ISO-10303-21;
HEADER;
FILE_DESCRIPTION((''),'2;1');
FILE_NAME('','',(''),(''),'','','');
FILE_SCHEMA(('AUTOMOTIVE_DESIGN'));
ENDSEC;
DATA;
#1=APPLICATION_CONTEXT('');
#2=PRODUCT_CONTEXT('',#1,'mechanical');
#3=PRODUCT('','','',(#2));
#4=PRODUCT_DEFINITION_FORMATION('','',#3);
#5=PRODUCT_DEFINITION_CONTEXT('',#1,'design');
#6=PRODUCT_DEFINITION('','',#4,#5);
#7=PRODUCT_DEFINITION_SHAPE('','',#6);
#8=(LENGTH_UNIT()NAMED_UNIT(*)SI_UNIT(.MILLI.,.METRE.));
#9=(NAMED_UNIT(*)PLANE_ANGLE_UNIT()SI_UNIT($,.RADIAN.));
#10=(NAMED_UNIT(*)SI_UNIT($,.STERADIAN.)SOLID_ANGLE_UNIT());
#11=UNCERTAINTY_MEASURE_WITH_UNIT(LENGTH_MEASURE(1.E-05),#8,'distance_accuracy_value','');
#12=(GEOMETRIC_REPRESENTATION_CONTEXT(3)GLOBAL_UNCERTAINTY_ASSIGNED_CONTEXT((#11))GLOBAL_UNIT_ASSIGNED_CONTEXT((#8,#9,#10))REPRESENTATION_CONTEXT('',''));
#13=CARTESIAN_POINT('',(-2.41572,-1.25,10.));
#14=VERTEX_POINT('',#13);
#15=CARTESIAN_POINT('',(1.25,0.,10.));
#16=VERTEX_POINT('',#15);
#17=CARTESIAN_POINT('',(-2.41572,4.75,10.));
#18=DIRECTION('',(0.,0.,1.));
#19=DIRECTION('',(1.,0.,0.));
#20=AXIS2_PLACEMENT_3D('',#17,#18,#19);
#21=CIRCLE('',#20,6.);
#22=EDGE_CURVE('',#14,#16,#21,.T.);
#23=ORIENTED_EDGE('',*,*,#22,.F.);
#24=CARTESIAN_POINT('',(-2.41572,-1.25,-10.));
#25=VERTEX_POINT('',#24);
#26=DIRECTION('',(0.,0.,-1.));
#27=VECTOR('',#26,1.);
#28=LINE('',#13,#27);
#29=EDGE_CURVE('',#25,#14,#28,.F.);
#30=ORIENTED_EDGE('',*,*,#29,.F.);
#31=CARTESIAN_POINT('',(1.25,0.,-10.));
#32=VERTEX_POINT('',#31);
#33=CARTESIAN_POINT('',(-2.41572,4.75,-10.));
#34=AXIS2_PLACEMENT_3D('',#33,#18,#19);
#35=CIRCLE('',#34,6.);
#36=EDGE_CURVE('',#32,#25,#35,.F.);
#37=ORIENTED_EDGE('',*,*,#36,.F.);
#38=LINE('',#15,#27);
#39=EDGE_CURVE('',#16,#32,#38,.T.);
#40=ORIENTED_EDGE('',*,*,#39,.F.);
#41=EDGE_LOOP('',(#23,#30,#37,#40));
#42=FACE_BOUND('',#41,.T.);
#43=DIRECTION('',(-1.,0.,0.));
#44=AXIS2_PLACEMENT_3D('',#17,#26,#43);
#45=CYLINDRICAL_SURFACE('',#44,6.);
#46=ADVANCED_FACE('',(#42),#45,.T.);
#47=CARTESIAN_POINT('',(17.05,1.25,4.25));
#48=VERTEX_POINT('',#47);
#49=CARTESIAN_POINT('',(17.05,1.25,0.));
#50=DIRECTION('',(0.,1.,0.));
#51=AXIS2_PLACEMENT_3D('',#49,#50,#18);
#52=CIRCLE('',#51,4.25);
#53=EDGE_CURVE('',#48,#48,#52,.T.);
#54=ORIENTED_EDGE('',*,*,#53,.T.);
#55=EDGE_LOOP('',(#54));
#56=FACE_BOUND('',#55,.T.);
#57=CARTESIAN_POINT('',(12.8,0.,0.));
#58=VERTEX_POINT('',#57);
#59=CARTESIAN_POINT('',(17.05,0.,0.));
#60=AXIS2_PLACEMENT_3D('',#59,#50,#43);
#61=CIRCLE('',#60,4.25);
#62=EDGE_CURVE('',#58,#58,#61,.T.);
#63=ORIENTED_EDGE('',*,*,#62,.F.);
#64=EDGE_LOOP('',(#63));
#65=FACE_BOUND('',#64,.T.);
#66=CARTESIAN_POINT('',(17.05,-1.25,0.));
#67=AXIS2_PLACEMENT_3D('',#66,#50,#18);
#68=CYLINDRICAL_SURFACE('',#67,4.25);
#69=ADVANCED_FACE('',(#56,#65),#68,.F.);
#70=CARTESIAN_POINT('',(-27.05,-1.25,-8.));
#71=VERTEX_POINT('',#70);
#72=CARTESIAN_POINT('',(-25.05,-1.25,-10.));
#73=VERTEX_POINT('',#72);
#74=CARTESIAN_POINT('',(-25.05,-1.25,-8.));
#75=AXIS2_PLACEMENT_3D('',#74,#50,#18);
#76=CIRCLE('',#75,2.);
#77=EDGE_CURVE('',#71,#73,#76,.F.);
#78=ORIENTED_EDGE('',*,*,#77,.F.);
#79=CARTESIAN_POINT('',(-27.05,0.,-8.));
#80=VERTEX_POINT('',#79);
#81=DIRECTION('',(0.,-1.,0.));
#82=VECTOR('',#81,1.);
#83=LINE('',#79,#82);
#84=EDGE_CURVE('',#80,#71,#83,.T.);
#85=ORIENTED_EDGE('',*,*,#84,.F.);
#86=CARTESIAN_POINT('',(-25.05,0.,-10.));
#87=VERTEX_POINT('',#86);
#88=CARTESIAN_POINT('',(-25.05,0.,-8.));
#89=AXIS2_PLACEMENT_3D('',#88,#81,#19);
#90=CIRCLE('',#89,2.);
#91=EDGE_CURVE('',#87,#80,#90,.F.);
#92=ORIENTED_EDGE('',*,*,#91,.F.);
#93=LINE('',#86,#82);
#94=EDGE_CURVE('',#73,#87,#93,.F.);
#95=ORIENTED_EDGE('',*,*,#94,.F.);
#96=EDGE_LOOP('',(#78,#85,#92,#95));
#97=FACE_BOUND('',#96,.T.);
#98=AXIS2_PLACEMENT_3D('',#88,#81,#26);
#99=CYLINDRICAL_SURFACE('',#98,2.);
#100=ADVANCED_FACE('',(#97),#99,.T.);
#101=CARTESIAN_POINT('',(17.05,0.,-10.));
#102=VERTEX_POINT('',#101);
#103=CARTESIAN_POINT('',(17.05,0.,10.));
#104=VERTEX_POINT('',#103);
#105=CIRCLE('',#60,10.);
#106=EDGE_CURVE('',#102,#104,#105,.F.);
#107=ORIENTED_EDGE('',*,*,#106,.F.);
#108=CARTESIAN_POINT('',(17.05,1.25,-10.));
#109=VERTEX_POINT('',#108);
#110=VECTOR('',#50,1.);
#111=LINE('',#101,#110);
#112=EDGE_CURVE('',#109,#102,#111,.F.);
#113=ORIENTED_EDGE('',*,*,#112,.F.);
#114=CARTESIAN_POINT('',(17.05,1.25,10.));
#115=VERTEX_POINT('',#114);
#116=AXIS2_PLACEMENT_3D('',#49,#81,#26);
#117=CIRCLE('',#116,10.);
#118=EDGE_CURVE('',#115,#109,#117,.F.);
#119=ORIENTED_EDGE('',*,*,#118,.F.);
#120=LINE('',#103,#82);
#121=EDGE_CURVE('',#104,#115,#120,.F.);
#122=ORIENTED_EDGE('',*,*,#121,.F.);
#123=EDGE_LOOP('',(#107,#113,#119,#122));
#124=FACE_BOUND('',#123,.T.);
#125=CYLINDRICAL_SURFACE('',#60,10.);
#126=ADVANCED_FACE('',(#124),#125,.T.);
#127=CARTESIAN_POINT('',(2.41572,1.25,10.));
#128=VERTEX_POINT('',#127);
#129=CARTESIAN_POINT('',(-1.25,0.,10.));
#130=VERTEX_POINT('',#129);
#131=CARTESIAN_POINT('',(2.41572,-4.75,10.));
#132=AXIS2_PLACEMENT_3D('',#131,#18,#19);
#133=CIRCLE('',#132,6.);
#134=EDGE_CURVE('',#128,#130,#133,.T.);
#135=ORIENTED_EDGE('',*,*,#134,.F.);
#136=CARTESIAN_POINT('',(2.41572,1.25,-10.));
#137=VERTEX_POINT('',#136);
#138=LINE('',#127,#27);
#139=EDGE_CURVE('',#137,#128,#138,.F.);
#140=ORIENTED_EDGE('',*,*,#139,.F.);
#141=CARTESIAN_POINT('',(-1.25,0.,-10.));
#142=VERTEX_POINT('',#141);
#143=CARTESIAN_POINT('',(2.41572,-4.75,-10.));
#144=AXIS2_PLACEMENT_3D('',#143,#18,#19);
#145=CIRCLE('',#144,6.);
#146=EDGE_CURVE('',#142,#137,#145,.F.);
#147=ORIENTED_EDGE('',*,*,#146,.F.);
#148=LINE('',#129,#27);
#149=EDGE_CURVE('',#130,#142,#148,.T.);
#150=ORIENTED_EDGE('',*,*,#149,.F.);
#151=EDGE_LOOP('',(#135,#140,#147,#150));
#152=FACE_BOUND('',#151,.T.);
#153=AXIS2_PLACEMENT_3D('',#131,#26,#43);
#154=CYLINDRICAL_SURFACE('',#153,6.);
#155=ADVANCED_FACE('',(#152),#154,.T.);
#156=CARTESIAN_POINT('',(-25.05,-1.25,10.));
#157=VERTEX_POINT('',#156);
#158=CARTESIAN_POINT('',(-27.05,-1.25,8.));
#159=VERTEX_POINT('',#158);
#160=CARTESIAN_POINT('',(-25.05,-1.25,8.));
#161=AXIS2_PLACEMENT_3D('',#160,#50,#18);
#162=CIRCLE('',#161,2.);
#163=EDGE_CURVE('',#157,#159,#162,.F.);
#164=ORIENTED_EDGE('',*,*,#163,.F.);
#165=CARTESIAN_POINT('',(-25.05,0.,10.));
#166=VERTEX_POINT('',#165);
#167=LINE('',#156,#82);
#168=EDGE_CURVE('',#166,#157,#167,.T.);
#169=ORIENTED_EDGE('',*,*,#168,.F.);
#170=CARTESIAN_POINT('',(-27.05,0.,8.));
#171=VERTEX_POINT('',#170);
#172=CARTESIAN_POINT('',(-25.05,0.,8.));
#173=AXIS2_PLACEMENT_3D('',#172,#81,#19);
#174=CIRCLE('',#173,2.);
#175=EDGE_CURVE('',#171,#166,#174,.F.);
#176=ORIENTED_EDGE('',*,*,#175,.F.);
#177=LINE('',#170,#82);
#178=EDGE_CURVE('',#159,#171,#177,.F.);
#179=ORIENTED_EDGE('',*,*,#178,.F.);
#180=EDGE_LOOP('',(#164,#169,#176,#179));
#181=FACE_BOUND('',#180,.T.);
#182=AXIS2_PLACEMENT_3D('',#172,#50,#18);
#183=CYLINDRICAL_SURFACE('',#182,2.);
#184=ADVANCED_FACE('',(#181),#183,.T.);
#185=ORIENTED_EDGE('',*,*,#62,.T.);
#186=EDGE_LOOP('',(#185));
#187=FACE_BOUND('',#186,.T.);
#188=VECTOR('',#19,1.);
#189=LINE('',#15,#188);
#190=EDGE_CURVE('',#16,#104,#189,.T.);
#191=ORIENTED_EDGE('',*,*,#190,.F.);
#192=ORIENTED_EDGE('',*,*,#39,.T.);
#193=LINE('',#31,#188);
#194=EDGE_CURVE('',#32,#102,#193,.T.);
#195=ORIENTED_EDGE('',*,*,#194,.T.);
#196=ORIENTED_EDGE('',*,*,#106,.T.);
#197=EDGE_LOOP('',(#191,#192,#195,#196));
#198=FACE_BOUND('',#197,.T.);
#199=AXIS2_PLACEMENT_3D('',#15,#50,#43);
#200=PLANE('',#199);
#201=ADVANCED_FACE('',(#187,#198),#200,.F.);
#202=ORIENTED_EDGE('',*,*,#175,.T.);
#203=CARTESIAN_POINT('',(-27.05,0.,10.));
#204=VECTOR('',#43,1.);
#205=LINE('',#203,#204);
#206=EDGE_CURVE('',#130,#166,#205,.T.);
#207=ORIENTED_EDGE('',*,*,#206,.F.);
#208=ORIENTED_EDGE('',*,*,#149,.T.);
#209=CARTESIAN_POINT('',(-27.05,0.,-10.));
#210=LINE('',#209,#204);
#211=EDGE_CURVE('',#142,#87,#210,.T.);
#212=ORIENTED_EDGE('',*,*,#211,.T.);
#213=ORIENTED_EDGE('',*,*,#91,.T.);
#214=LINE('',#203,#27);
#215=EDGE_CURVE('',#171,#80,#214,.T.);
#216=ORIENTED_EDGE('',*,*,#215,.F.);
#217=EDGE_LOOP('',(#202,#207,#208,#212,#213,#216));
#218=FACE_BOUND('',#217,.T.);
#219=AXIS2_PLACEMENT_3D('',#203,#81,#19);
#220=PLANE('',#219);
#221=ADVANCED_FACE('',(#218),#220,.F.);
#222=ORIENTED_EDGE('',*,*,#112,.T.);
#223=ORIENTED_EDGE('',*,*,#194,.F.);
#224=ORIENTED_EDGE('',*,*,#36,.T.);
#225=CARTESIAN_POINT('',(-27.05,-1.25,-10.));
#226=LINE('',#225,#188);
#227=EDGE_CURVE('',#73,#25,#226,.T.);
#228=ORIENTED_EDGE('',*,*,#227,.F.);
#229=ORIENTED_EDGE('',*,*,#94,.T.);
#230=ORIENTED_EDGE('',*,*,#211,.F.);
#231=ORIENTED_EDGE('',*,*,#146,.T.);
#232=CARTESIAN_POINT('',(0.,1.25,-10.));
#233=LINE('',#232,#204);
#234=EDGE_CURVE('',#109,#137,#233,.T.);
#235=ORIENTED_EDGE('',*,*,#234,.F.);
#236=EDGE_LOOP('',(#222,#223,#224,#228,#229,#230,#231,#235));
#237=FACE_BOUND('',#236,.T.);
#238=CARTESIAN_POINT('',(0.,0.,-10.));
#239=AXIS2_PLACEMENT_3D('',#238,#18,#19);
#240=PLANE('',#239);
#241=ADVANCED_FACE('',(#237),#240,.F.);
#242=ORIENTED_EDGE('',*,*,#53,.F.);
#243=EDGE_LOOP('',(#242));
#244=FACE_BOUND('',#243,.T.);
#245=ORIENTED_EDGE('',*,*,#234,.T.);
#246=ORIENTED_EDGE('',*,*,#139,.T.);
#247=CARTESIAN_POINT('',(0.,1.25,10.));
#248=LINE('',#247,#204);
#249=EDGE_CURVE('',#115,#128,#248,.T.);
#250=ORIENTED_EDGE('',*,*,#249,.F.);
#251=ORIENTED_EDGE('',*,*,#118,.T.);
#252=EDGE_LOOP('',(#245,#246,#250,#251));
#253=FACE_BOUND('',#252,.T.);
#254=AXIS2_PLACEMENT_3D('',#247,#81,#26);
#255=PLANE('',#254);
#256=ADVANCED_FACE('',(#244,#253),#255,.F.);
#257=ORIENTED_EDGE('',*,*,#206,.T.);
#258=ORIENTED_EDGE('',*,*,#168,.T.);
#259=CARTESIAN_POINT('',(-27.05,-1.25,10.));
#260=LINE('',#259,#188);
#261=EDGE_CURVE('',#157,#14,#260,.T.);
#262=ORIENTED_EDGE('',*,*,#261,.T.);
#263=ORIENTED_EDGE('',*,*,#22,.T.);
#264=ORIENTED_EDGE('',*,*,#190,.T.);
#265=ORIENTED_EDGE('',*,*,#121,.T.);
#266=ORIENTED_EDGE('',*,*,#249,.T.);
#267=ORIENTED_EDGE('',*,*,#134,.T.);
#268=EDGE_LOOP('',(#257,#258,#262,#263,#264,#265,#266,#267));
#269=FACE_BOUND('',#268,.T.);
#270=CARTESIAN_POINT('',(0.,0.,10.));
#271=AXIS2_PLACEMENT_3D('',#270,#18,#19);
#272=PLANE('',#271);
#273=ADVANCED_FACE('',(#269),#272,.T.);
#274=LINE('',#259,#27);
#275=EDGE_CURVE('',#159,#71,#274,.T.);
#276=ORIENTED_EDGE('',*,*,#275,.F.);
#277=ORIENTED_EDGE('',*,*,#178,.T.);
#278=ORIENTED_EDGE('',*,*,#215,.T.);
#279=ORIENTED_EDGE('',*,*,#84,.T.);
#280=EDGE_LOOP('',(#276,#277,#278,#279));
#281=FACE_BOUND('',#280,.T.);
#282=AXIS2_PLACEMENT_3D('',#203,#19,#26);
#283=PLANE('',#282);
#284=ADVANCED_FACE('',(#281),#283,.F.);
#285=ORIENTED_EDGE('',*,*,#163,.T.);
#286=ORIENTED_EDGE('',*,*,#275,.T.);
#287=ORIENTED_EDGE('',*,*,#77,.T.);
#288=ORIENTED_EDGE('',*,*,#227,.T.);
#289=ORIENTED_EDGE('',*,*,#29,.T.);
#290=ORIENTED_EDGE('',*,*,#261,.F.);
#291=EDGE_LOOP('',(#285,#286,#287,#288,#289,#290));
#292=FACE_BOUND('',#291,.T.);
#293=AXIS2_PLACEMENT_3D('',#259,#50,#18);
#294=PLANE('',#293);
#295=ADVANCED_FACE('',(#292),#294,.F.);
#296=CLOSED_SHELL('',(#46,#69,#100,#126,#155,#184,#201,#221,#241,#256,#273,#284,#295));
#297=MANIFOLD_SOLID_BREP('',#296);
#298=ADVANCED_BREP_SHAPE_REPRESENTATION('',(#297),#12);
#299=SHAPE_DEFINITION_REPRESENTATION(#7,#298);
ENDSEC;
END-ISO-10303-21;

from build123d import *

# Parameters (mm, degrees)
BOSS_EXTRUDE1_DEPTH = 10
FILLET1_R           = 2
FILLET2_RADIUS      = 10
FILLET2_LENGTH      = 1.25
FILLET3_R           = 6
SKETCH2_R           = 4.25
CUT_EXTRUDE1_DEPTH  = 29.94740921


with BuildPart() as part:
    # Sketch1 → Boss-Extrude1 (new, symmetric)
    with BuildSketch(Plane.XY):
        Polygon((0, 1.25), (-1.25, 0), (-27.05, 0), (-27.05, -1.25), (0, -1.25), (1.25, 0), (27.05, 0), (27.05, 1.25), align=None)
    extrude(amount=BOSS_EXTRUDE1_DEPTH, both=True)

    # Fillet1
    fillet1_edges = [part.edges().sort_by_distance(p)[0] for p in [
        (-27.05, -0.625, -10),
        (-27.05, -0.625, 10),
    ]]
    fillet(fillet1_edges, radius=FILLET1_R)

    # Fillet2: full round fillet: the end face becomes a half cylinder, R = half its width
    fillet2_face = Plane((27.05, 0.625, 0), x_dir=(0, -1, 0), z_dir=(1, 0, 0))  # on the end face: x along it, z out of the body
    fillet2_slab = fillet2_face.offset(-FILLET2_RADIUS / 2) * Box(FILLET2_LENGTH, 2 * FILLET2_RADIUS, FILLET2_RADIUS, mode=Mode.PRIVATE)  # the body's end, R deep
    fillet2_round = Plane((17.05, 0.625, 0), x_dir=(1, 0, 0), z_dir=(0, -1, 0)) * Cylinder(FILLET2_RADIUS, FILLET2_LENGTH, mode=Mode.PRIVATE)  # its axis R under the face
    add(fillet2_slab - fillet2_round, mode=Mode.SUBTRACT)

    # Fillet3
    # the kernel refuses this fillet: 6 mm, written as the material it takes off along each edge
    with BuildSketch(Plane(origin=(0, -1.25, -16.039298937), x_dir=(-1, 0, 0), z_dir=(0, 0, 1))) as fillet3_piece_1:
        with BuildLine():
            CenterArc((2.415719575, -6), FILLET3_R, 90, 37.658462006)
            Line((-1.25, -1.25), (-1.323314391, -1.155))
            ThreePointArc((-1.323314391, -1.155), (-0.709852814, -0.540147186), (-0.084852814, 0.084852814))
            Line((-0.084852814, 0.084852814), (0, 0.12))
            Line((0, 0.12), (2.415719575, 0.12))
            Line((2.415719575, 0.12), (2.415719575, 0))
        make_face()
    extrude(amount=32.078597873, mode=Mode.SUBTRACT)
    with BuildSketch(Plane(origin=(0, 1.25, 16.039298937), x_dir=(1, 0, 0), z_dir=(0, 0, -1))) as fillet3_piece_2:
        with BuildLine():
            CenterArc((2.415719575, 6), FILLET3_R, 232.341537994, 37.658462006)
            Line((-1.25, 1.25), (-1.323314391, 1.155))
            ThreePointArc((-1.323314391, 1.155), (-0.709852814, 0.540147186), (-0.084852814, -0.084852814))
            Line((-0.084852814, -0.084852814), (0, -0.12))
            Line((0, -0.12), (2.415719575, -0.12))
            Line((2.415719575, -0.12), (2.415719575, 0))
        make_face()
    extrude(amount=32.078597873, mode=Mode.SUBTRACT)

    # Sketch2 → Cut-Extrude1 (cut, through all)
    with BuildSketch(Plane(origin=(0, 1.25, 0), x_dir=(1, 0, 0), z_dir=(0, 1, 0))):
        with Locations(Location((17.05, 0, 0), (0, 0, 270))):
            Circle(SKETCH2_R)
    extrude(amount=-CUT_EXTRUDE1_DEPTH, mode=Mode.SUBTRACT)


solid = part.part
